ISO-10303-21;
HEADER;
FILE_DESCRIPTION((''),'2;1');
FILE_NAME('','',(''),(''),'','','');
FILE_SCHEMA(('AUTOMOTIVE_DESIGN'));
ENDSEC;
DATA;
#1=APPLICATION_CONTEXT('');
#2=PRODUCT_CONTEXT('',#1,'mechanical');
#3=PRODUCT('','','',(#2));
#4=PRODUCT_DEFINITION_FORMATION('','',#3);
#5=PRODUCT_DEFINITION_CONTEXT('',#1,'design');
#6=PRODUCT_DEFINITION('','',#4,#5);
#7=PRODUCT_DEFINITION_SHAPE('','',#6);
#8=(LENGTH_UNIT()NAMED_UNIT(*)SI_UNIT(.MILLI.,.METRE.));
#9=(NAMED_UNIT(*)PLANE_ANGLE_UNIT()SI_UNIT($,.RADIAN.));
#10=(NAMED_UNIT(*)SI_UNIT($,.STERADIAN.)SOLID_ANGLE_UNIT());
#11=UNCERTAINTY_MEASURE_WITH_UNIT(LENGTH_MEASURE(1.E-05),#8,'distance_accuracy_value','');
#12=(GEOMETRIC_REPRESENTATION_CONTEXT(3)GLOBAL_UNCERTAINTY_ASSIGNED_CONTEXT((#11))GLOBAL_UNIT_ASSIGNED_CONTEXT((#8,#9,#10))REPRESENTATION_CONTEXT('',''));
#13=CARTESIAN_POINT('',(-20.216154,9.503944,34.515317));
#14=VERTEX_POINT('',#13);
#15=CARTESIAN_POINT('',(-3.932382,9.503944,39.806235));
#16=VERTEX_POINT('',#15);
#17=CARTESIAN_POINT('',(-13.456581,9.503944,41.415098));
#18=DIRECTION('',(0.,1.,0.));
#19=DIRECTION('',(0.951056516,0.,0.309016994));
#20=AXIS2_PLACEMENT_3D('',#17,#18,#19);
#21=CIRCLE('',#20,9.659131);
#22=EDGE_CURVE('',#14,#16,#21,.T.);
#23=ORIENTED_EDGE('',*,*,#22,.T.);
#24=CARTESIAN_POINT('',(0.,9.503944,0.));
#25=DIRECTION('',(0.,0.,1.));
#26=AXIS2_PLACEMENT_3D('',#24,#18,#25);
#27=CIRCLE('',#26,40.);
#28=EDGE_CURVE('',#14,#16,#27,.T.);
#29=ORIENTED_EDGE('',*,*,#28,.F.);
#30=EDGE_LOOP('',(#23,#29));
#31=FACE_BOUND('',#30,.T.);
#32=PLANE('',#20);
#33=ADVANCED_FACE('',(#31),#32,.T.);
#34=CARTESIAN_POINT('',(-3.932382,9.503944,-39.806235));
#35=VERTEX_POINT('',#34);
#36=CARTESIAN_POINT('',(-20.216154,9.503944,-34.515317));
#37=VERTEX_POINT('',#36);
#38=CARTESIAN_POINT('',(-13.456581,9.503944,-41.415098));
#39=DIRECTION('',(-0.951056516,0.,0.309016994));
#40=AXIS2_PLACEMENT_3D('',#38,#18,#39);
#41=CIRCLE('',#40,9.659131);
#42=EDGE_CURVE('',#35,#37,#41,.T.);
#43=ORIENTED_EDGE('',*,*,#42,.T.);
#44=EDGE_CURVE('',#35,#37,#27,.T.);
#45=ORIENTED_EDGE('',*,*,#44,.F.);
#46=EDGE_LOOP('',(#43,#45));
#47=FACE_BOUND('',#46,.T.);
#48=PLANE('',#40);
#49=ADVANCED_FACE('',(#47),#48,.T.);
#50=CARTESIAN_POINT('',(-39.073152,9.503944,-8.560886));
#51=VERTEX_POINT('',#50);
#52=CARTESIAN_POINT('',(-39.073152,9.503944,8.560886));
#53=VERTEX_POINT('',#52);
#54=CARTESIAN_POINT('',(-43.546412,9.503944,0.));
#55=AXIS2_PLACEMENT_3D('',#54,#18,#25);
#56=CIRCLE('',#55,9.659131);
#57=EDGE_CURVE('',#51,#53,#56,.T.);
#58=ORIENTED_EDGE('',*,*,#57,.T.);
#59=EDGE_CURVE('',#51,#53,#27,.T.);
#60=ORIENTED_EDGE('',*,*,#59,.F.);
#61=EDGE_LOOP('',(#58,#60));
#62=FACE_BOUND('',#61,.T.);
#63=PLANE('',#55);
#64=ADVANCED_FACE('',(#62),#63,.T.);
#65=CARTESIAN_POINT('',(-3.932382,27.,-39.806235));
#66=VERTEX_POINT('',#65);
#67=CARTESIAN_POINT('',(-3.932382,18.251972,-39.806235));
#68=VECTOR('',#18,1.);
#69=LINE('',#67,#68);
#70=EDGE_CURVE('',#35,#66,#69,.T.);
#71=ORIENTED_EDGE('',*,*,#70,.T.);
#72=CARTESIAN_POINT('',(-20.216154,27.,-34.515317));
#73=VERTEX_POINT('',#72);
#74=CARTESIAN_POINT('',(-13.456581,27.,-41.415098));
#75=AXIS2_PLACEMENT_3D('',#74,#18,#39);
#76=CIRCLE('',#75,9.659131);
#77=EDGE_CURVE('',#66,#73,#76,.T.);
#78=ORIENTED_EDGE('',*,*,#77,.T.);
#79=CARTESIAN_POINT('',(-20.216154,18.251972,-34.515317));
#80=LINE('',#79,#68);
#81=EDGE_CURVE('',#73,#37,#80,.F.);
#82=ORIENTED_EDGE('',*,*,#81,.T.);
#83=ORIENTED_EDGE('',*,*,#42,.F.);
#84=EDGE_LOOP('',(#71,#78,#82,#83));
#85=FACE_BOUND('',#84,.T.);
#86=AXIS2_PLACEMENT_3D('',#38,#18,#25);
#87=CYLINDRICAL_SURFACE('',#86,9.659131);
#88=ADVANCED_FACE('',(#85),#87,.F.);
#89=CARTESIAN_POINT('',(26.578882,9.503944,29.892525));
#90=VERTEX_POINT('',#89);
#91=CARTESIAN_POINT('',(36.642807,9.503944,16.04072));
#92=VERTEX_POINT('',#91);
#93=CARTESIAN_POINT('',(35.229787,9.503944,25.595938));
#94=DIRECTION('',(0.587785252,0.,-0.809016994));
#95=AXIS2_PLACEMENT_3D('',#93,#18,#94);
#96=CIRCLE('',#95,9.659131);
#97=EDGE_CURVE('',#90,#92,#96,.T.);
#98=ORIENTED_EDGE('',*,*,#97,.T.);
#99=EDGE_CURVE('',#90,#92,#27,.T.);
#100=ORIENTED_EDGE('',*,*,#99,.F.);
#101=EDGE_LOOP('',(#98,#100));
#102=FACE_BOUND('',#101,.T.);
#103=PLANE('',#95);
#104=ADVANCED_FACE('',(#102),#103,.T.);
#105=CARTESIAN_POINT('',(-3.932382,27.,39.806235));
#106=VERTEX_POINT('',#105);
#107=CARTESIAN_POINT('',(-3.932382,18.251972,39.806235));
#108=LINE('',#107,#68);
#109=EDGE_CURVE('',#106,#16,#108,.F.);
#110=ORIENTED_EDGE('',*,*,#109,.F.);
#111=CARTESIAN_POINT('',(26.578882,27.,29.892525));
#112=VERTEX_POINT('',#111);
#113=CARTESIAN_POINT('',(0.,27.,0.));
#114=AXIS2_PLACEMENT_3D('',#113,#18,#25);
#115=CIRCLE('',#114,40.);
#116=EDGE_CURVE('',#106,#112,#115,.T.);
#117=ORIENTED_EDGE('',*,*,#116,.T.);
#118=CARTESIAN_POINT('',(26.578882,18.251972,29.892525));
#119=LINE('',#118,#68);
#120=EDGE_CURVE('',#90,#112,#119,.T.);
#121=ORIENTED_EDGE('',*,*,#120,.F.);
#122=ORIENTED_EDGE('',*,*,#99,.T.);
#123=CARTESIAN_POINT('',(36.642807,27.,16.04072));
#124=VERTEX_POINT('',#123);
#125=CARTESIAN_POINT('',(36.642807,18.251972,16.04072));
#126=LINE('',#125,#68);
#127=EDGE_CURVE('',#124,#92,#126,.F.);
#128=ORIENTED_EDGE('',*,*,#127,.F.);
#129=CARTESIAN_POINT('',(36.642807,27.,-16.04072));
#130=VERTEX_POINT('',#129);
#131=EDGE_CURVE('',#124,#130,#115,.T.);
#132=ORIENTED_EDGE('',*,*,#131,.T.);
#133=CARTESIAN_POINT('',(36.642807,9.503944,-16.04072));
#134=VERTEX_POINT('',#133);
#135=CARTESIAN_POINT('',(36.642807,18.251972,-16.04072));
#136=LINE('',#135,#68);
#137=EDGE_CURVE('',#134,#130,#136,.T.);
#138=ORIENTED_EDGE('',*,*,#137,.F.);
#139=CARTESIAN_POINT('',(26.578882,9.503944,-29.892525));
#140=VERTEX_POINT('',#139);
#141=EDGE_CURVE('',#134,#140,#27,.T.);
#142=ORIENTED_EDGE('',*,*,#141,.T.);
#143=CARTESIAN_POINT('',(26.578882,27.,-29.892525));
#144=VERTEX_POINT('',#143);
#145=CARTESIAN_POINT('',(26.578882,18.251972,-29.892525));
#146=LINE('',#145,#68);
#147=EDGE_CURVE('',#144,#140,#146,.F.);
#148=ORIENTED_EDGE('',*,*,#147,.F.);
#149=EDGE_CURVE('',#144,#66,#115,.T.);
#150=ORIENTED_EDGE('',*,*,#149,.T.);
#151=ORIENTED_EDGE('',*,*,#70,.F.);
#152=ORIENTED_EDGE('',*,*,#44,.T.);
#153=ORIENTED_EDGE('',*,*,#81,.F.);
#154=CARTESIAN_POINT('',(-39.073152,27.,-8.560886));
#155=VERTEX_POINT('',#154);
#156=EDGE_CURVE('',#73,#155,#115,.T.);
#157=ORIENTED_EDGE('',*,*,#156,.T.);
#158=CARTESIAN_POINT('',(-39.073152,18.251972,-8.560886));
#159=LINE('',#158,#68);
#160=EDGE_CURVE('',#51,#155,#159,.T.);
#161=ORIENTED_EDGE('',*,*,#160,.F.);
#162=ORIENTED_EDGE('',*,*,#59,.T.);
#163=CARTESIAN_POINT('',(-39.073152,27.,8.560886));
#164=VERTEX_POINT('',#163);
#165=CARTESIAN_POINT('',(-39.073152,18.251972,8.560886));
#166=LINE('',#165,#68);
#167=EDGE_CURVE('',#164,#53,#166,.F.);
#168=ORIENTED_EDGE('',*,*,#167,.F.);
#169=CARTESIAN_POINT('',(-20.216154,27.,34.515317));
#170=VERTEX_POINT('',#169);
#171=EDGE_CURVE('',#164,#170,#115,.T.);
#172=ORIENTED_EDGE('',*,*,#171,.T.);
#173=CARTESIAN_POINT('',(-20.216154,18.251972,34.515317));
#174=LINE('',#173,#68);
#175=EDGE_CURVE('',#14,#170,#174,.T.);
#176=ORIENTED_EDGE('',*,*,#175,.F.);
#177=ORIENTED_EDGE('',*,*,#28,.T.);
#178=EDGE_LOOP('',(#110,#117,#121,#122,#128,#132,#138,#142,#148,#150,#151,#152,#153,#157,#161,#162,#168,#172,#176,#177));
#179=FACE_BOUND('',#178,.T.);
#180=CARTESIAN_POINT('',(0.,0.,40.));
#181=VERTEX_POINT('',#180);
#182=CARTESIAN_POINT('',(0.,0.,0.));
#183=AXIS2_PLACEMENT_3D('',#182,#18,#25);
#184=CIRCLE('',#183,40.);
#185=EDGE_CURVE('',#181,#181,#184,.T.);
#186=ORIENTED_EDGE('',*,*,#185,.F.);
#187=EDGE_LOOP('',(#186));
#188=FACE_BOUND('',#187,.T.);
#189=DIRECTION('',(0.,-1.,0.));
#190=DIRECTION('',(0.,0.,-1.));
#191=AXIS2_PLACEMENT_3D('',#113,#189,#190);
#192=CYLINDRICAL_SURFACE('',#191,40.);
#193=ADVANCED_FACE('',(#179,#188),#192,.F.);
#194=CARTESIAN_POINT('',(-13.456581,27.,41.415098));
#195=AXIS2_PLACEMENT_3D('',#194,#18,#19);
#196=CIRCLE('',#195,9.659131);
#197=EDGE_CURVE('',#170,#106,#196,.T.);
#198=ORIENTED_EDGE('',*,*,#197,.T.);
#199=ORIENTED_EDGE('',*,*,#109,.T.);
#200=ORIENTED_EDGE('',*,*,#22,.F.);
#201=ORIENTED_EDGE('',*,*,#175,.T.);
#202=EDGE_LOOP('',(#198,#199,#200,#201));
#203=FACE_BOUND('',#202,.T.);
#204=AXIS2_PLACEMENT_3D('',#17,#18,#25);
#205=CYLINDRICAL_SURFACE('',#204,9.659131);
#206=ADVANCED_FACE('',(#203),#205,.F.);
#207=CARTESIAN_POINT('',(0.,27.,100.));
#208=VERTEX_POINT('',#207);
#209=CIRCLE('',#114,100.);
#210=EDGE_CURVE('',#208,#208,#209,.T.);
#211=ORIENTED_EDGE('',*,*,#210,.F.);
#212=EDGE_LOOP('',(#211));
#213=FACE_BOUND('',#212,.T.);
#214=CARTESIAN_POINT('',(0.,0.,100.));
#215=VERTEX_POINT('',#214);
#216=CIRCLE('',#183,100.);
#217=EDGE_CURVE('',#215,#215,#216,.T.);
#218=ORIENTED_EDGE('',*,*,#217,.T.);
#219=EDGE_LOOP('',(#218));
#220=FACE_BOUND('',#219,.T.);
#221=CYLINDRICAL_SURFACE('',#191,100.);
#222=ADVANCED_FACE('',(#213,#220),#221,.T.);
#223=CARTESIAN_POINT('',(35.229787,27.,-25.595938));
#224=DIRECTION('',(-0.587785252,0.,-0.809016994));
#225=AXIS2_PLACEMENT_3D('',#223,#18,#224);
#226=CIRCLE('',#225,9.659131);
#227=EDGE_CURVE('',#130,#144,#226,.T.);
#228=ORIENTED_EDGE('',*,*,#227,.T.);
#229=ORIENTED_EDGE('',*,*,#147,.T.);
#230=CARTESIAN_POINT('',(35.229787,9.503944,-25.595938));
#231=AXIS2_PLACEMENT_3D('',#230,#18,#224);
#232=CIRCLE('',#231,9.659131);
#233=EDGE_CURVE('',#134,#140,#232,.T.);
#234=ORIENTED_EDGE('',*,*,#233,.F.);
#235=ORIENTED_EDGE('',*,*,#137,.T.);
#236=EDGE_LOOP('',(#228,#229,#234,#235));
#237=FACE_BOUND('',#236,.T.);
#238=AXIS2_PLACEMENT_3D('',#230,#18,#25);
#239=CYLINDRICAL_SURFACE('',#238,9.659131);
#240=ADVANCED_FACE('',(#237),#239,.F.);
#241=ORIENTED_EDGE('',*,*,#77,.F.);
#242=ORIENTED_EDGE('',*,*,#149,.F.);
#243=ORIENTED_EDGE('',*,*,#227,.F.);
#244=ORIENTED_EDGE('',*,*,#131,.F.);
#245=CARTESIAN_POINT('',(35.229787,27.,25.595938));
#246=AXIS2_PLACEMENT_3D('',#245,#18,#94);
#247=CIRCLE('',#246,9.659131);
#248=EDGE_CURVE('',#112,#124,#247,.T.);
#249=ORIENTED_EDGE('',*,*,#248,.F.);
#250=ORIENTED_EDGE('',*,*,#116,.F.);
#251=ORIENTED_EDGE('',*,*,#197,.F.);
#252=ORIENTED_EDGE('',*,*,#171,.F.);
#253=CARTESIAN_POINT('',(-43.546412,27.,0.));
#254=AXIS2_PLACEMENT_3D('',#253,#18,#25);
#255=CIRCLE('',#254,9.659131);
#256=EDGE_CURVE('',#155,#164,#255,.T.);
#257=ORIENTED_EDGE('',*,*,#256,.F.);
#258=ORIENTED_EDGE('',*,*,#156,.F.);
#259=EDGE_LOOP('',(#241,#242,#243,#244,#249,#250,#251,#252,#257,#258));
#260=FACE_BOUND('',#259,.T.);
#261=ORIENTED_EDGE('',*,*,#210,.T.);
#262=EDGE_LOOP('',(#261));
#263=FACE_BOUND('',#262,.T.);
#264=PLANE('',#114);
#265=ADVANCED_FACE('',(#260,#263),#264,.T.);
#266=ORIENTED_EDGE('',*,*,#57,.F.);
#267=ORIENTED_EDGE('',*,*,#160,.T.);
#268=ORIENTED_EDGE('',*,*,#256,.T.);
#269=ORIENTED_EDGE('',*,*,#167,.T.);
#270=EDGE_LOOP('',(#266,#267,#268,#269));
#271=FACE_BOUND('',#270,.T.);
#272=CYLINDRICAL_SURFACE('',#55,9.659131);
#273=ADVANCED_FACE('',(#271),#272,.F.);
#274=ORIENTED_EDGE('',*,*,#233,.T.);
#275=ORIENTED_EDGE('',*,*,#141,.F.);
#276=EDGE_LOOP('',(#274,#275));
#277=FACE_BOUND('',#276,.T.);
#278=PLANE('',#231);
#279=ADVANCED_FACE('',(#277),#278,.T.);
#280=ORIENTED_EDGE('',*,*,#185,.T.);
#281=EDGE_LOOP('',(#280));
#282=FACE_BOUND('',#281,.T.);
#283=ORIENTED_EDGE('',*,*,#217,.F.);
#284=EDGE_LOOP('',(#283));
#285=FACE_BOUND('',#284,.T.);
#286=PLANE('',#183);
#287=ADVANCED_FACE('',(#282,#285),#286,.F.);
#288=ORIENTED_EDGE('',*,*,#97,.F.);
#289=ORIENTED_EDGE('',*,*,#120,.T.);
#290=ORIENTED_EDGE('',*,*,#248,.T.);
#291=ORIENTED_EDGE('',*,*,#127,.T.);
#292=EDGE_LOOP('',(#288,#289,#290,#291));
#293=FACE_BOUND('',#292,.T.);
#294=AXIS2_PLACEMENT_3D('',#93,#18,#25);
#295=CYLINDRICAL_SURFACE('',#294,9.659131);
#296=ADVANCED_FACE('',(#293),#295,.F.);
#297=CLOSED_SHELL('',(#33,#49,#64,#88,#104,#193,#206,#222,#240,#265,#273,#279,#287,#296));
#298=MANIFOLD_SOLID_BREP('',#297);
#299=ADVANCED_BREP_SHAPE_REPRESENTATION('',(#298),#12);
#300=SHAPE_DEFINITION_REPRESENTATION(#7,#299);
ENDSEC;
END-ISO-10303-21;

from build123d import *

# Parameters (mm, degrees)
SKETCH1_R           = 100
BOSS_EXTRUDE1_DEPTH = 27
SKETCH2_R           = 40
CUT_EXTRUDE1_DEPTH  = 144.975692393
SKETCH3_R           = 9.659131225
CUT_EXTRUDE2_DEPTH  = 17.496056464
CIRPATTERN1_COUNT   = 5


with BuildPart() as part:
    # Sketch1 → Boss-Extrude1 (new body)
    with BuildSketch(Plane(origin=(0, 0, 0), x_dir=(1, 0, 0), z_dir=(0, 1, 0))):
        Circle(SKETCH1_R)
    extrude(amount=BOSS_EXTRUDE1_DEPTH)

    # Sketch2 → Cut-Extrude1 (cut, through all)
    with BuildSketch(Plane(origin=(0, 0, 0), x_dir=(1, 0, 0), z_dir=(0, 1, 0))):
        Circle(SKETCH2_R)
    extrude(amount=CUT_EXTRUDE1_DEPTH, mode=Mode.SUBTRACT)

    # Sketch3 → Cut-Extrude2 (cut)
    with BuildSketch(Plane(origin=(0, 27, 0), x_dir=(1, 0, 0), z_dir=(0, 1, 0))):
        with Locations((-43.546411517, 0)):
            Circle(SKETCH3_R)
    cut_extrude2 = extrude(amount=-CUT_EXTRUDE2_DEPTH, mode=Mode.SUBTRACT)

    # CirPattern1: Cut-Extrude2 ×5 about axis
    cirpattern1_axis = Axis((0, 0, 0), (0, 1, 0))
    for i in range(1, CIRPATTERN1_COUNT):
        add(cut_extrude2.rotate(cirpattern1_axis, i * 360 / CIRPATTERN1_COUNT), mode=Mode.SUBTRACT)


solid = part.part
